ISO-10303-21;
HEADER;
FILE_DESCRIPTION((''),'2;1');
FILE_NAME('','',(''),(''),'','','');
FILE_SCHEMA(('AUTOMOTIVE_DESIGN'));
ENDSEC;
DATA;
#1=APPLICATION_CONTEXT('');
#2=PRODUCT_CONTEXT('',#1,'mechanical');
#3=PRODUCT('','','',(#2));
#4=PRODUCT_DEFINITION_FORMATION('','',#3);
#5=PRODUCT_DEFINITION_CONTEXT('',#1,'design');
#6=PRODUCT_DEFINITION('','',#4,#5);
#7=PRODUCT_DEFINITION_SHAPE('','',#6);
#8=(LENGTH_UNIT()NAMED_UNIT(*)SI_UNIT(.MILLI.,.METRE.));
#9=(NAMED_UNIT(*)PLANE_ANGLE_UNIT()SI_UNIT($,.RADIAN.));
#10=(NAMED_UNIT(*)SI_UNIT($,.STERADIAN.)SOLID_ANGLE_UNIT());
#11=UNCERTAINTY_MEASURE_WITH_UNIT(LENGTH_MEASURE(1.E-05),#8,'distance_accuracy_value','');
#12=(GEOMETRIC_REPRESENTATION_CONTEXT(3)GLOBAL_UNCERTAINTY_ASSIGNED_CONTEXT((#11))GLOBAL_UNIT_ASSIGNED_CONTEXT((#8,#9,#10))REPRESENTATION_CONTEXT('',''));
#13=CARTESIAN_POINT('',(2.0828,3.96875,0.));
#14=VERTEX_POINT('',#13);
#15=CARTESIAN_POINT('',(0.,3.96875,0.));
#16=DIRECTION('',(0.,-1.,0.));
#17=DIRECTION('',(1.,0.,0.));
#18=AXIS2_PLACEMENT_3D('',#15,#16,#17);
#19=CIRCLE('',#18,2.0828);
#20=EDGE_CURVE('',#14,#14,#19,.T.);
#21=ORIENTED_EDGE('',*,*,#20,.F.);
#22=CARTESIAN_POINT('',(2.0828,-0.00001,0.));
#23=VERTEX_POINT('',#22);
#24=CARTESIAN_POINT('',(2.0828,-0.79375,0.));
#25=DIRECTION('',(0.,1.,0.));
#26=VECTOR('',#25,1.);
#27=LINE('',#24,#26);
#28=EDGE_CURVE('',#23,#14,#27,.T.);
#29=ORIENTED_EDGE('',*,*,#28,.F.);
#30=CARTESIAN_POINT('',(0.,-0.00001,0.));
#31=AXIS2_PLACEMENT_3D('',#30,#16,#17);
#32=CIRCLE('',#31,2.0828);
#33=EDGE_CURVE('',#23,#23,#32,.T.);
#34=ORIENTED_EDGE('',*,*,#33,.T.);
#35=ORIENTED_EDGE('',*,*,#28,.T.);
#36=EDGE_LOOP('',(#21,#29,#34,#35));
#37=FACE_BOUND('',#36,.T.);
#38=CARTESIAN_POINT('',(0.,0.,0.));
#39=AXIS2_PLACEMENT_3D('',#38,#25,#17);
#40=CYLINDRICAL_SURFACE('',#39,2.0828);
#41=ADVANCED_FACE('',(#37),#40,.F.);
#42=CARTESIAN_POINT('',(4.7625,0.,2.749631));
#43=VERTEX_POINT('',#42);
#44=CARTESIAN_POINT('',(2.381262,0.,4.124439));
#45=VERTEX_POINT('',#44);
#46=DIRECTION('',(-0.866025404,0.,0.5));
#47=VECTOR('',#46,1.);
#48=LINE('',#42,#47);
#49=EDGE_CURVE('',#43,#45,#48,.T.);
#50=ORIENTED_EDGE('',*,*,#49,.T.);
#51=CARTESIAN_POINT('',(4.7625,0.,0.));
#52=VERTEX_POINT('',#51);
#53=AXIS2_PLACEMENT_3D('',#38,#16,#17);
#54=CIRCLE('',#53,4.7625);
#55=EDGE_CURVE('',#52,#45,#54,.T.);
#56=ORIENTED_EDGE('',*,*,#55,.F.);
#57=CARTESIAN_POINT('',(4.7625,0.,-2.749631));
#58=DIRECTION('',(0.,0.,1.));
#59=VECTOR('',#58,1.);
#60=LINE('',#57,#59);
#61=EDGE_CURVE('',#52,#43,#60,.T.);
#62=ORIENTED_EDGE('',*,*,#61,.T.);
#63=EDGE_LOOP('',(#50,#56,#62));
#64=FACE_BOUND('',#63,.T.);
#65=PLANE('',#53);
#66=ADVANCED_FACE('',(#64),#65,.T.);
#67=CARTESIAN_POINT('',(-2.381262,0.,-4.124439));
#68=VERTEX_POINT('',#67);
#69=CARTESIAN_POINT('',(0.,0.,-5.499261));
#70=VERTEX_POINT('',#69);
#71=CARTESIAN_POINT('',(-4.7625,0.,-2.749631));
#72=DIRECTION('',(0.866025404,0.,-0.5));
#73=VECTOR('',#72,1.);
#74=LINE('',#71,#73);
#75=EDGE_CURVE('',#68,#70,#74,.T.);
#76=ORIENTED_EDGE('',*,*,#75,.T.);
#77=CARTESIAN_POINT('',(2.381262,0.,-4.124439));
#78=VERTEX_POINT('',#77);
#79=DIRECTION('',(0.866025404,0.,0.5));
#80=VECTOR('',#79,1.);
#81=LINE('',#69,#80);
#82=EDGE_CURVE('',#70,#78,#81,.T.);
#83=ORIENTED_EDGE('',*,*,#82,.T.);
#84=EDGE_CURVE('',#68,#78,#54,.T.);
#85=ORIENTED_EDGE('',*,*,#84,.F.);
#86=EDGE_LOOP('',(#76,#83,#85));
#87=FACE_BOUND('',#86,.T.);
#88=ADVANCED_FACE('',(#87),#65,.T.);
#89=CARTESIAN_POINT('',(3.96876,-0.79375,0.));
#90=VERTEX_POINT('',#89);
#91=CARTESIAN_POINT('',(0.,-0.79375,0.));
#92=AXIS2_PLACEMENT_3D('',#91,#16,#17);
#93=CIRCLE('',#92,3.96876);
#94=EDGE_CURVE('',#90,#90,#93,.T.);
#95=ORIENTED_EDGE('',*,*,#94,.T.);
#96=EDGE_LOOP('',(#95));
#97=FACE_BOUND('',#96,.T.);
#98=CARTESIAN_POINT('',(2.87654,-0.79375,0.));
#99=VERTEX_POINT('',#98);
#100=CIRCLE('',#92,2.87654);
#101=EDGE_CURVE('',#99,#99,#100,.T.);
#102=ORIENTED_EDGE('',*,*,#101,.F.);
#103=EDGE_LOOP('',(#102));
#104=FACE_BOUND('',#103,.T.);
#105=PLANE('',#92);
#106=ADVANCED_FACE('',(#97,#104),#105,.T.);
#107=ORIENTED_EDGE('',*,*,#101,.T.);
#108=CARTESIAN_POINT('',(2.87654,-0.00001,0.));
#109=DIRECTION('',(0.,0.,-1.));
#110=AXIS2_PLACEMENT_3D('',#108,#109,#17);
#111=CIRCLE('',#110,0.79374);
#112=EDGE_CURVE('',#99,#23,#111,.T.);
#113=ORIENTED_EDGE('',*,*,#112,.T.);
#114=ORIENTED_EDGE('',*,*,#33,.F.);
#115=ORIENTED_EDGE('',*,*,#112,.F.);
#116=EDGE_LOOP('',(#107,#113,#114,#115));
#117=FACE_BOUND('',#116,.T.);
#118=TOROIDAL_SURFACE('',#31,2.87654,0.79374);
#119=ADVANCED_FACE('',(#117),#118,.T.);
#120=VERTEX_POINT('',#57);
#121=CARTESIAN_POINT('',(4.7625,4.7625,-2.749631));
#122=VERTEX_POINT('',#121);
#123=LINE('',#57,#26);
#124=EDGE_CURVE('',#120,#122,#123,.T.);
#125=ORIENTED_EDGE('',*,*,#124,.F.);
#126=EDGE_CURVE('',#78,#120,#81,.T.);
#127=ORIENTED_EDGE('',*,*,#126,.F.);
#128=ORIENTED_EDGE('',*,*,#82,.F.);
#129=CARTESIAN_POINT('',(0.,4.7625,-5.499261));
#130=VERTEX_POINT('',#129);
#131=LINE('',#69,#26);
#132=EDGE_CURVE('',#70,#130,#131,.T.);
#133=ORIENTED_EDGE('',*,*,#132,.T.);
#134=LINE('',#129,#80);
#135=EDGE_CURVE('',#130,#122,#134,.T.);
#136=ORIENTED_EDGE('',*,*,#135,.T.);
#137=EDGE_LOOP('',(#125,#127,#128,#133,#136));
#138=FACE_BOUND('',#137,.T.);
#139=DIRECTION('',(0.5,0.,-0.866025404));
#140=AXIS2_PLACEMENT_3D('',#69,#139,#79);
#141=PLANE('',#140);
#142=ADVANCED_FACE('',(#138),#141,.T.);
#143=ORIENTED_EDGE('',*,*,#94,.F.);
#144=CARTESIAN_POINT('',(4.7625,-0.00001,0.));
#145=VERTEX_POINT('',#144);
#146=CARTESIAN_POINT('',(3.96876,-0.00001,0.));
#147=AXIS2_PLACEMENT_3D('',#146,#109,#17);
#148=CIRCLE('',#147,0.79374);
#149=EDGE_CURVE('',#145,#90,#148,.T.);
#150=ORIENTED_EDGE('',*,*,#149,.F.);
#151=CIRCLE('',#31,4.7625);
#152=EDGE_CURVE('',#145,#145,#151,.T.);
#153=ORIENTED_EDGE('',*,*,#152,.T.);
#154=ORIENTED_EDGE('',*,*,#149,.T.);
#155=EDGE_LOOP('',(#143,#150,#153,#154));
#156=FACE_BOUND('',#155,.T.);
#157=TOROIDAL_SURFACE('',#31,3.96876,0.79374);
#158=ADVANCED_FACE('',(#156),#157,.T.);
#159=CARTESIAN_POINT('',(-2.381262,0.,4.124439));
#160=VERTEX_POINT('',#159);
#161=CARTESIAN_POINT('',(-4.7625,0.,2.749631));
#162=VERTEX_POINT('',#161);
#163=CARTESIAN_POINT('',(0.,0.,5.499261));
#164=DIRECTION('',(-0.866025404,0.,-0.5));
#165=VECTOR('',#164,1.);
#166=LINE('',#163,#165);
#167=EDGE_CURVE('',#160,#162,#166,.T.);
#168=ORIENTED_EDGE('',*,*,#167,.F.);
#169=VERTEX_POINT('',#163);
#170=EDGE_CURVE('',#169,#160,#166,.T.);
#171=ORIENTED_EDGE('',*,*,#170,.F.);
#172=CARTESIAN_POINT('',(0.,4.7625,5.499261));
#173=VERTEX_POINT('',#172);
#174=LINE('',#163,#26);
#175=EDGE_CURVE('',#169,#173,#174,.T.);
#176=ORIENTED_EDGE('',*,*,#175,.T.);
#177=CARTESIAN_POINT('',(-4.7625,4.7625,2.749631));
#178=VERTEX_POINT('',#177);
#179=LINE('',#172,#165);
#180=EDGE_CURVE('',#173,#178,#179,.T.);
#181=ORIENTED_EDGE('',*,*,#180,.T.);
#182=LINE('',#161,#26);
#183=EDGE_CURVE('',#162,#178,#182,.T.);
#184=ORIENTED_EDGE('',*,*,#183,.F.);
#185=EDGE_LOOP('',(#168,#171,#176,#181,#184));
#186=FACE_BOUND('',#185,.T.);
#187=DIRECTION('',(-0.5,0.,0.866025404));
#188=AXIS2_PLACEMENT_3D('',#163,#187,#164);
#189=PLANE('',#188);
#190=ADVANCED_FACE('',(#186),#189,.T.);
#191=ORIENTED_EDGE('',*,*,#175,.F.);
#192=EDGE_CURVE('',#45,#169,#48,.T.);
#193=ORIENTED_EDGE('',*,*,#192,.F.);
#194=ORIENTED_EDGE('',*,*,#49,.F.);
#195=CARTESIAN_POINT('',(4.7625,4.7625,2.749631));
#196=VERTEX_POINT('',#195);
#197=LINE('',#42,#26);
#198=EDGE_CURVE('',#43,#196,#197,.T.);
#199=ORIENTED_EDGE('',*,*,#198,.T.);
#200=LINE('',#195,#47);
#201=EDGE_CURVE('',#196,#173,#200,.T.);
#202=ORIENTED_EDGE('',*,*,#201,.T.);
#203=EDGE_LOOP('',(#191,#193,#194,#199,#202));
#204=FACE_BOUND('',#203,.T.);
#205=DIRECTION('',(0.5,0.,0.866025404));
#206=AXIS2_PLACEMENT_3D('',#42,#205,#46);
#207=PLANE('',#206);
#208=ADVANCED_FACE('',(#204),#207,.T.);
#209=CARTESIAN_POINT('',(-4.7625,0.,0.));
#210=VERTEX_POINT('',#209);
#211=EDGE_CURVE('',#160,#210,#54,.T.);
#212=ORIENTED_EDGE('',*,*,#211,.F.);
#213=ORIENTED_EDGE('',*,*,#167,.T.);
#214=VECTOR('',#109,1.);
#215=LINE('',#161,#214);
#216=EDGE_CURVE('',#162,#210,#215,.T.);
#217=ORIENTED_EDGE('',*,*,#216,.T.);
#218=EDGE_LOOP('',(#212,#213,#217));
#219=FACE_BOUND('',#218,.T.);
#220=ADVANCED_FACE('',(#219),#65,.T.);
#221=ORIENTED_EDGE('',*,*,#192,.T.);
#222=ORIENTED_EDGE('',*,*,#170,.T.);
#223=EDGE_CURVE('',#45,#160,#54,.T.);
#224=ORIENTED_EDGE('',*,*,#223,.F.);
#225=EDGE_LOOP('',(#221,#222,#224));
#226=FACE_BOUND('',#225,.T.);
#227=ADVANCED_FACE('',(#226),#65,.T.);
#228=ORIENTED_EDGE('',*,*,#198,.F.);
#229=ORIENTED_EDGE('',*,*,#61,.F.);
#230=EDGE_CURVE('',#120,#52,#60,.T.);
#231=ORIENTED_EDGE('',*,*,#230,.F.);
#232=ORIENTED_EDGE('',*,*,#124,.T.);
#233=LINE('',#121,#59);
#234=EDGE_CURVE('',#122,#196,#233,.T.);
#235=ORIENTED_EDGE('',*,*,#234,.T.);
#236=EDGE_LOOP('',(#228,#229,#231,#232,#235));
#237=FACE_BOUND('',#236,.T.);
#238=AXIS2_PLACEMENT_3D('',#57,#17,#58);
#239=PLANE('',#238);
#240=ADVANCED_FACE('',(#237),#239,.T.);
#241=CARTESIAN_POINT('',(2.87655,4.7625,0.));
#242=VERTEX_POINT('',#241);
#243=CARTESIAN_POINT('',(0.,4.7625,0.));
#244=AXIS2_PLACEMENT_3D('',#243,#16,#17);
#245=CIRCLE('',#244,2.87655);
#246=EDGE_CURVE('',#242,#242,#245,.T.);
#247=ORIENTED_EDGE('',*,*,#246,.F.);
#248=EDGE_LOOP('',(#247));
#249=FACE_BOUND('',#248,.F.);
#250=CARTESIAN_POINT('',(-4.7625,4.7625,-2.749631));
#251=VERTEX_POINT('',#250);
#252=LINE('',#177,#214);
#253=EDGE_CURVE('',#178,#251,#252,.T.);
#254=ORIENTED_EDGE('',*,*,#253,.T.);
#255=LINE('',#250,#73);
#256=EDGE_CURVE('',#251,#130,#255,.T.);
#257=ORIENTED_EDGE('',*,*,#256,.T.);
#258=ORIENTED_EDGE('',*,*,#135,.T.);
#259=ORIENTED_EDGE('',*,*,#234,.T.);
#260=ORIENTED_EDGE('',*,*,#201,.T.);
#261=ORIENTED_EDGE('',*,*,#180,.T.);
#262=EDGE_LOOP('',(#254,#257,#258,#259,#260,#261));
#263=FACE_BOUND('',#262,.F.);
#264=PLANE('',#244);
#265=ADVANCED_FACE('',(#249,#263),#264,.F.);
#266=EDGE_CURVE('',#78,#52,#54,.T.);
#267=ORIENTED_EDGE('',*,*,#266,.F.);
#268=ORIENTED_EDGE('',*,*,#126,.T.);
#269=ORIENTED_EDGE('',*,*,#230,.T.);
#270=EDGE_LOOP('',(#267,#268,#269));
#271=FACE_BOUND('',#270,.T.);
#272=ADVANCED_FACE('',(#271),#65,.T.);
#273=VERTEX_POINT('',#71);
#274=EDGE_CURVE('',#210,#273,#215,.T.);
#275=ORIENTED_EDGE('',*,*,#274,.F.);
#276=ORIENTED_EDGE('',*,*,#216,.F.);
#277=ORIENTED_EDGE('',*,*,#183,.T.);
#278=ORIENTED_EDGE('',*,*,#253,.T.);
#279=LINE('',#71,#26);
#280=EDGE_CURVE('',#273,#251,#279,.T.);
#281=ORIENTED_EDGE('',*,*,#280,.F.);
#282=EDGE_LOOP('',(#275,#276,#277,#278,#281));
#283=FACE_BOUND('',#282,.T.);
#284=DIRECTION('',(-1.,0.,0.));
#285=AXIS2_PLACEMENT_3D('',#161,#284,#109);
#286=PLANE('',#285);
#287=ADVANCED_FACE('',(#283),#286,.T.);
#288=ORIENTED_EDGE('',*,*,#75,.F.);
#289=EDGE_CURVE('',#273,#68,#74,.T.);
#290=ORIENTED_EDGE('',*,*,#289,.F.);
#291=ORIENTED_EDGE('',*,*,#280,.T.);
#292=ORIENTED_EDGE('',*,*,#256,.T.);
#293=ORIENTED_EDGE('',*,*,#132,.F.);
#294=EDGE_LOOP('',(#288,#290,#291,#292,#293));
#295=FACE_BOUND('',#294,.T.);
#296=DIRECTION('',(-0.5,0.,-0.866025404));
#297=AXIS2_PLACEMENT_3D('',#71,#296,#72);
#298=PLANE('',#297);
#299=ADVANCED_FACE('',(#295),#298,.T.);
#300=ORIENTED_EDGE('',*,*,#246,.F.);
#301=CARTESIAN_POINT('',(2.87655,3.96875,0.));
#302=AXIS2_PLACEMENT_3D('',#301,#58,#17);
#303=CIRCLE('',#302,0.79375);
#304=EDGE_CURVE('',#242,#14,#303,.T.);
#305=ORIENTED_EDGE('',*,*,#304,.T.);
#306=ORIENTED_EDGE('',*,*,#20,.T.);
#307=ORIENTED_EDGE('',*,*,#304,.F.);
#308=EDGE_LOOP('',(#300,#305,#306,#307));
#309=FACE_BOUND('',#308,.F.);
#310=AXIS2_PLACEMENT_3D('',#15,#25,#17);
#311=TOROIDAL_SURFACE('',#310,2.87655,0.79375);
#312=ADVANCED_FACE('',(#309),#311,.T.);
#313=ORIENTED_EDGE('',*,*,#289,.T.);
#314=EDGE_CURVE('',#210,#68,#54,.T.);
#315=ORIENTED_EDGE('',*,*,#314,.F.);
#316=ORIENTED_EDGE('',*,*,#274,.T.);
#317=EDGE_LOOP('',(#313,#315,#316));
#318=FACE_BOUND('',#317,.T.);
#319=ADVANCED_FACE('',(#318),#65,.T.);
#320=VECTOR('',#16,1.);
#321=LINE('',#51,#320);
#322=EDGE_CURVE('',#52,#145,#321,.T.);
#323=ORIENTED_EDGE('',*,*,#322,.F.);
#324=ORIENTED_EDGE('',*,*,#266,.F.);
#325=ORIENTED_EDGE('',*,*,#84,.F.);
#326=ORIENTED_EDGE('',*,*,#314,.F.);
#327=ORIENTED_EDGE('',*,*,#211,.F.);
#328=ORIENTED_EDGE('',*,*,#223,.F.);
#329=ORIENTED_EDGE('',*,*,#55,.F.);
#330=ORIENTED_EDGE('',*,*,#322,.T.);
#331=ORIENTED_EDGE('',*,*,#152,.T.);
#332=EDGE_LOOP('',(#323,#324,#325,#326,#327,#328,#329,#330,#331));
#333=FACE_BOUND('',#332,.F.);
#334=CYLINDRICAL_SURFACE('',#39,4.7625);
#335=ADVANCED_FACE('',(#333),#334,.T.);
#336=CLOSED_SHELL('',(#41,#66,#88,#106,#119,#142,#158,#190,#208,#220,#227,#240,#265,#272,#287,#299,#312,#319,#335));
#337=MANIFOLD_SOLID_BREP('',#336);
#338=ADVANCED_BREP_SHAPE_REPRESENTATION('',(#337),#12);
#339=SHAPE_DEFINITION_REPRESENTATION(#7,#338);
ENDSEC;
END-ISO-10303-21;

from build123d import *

# Parameters (mm, degrees)
F0_R     = 2.0828
F1_DEPTH = 4.7625
F2_R     = 4.7625
F2_R_2   = 2.0828
F3_DEPTH = 0.79375
F4_R     = 0.79374
F5_R     = 0.79375


# Not quite as in the source:
# - a fillet or chamfer is up to 0.001 mm smaller than in the source, because OpenCascade refuses the exact size


with BuildPart() as f1:
    # F0 (on Front) → F1 (new body)
    with BuildSketch(Plane.XZ):
        Polygon((4.7625, -2.749630657), (4.7625, 2.749630657), (0, 5.499261314), (-4.7625, 2.749630657), (-4.7625, -2.749630657), (0, -5.499261314), align=None)
        Circle(F0_R, mode=Mode.SUBTRACT)
    extrude(amount=-F1_DEPTH)

    # F2 (on face) → F3 (join)
    with BuildSketch(Plane.XZ):
        Circle(F2_R)
        Circle(F2_R_2, mode=Mode.SUBTRACT)
    extrude(amount=F3_DEPTH)

    # F4 (radius 0.79375 in the source; OpenCascade refuses exactly that, so slightly less here)
    f4_edges = [f1.edges().sort_by_distance(p)[0] for p in [
        (-4.7625, -0.79375, 0),
        (-2.0828, -0.79375, 0),
    ]]
    fillet(f4_edges, radius=F4_R)

    # F5
    f5_edges = [f1.edges().sort_by_distance(p)[0] for p in [
        (-2.0828, 4.7625, 0),
    ]]
    fillet(f5_edges, radius=F5_R)


solid = f1.part
